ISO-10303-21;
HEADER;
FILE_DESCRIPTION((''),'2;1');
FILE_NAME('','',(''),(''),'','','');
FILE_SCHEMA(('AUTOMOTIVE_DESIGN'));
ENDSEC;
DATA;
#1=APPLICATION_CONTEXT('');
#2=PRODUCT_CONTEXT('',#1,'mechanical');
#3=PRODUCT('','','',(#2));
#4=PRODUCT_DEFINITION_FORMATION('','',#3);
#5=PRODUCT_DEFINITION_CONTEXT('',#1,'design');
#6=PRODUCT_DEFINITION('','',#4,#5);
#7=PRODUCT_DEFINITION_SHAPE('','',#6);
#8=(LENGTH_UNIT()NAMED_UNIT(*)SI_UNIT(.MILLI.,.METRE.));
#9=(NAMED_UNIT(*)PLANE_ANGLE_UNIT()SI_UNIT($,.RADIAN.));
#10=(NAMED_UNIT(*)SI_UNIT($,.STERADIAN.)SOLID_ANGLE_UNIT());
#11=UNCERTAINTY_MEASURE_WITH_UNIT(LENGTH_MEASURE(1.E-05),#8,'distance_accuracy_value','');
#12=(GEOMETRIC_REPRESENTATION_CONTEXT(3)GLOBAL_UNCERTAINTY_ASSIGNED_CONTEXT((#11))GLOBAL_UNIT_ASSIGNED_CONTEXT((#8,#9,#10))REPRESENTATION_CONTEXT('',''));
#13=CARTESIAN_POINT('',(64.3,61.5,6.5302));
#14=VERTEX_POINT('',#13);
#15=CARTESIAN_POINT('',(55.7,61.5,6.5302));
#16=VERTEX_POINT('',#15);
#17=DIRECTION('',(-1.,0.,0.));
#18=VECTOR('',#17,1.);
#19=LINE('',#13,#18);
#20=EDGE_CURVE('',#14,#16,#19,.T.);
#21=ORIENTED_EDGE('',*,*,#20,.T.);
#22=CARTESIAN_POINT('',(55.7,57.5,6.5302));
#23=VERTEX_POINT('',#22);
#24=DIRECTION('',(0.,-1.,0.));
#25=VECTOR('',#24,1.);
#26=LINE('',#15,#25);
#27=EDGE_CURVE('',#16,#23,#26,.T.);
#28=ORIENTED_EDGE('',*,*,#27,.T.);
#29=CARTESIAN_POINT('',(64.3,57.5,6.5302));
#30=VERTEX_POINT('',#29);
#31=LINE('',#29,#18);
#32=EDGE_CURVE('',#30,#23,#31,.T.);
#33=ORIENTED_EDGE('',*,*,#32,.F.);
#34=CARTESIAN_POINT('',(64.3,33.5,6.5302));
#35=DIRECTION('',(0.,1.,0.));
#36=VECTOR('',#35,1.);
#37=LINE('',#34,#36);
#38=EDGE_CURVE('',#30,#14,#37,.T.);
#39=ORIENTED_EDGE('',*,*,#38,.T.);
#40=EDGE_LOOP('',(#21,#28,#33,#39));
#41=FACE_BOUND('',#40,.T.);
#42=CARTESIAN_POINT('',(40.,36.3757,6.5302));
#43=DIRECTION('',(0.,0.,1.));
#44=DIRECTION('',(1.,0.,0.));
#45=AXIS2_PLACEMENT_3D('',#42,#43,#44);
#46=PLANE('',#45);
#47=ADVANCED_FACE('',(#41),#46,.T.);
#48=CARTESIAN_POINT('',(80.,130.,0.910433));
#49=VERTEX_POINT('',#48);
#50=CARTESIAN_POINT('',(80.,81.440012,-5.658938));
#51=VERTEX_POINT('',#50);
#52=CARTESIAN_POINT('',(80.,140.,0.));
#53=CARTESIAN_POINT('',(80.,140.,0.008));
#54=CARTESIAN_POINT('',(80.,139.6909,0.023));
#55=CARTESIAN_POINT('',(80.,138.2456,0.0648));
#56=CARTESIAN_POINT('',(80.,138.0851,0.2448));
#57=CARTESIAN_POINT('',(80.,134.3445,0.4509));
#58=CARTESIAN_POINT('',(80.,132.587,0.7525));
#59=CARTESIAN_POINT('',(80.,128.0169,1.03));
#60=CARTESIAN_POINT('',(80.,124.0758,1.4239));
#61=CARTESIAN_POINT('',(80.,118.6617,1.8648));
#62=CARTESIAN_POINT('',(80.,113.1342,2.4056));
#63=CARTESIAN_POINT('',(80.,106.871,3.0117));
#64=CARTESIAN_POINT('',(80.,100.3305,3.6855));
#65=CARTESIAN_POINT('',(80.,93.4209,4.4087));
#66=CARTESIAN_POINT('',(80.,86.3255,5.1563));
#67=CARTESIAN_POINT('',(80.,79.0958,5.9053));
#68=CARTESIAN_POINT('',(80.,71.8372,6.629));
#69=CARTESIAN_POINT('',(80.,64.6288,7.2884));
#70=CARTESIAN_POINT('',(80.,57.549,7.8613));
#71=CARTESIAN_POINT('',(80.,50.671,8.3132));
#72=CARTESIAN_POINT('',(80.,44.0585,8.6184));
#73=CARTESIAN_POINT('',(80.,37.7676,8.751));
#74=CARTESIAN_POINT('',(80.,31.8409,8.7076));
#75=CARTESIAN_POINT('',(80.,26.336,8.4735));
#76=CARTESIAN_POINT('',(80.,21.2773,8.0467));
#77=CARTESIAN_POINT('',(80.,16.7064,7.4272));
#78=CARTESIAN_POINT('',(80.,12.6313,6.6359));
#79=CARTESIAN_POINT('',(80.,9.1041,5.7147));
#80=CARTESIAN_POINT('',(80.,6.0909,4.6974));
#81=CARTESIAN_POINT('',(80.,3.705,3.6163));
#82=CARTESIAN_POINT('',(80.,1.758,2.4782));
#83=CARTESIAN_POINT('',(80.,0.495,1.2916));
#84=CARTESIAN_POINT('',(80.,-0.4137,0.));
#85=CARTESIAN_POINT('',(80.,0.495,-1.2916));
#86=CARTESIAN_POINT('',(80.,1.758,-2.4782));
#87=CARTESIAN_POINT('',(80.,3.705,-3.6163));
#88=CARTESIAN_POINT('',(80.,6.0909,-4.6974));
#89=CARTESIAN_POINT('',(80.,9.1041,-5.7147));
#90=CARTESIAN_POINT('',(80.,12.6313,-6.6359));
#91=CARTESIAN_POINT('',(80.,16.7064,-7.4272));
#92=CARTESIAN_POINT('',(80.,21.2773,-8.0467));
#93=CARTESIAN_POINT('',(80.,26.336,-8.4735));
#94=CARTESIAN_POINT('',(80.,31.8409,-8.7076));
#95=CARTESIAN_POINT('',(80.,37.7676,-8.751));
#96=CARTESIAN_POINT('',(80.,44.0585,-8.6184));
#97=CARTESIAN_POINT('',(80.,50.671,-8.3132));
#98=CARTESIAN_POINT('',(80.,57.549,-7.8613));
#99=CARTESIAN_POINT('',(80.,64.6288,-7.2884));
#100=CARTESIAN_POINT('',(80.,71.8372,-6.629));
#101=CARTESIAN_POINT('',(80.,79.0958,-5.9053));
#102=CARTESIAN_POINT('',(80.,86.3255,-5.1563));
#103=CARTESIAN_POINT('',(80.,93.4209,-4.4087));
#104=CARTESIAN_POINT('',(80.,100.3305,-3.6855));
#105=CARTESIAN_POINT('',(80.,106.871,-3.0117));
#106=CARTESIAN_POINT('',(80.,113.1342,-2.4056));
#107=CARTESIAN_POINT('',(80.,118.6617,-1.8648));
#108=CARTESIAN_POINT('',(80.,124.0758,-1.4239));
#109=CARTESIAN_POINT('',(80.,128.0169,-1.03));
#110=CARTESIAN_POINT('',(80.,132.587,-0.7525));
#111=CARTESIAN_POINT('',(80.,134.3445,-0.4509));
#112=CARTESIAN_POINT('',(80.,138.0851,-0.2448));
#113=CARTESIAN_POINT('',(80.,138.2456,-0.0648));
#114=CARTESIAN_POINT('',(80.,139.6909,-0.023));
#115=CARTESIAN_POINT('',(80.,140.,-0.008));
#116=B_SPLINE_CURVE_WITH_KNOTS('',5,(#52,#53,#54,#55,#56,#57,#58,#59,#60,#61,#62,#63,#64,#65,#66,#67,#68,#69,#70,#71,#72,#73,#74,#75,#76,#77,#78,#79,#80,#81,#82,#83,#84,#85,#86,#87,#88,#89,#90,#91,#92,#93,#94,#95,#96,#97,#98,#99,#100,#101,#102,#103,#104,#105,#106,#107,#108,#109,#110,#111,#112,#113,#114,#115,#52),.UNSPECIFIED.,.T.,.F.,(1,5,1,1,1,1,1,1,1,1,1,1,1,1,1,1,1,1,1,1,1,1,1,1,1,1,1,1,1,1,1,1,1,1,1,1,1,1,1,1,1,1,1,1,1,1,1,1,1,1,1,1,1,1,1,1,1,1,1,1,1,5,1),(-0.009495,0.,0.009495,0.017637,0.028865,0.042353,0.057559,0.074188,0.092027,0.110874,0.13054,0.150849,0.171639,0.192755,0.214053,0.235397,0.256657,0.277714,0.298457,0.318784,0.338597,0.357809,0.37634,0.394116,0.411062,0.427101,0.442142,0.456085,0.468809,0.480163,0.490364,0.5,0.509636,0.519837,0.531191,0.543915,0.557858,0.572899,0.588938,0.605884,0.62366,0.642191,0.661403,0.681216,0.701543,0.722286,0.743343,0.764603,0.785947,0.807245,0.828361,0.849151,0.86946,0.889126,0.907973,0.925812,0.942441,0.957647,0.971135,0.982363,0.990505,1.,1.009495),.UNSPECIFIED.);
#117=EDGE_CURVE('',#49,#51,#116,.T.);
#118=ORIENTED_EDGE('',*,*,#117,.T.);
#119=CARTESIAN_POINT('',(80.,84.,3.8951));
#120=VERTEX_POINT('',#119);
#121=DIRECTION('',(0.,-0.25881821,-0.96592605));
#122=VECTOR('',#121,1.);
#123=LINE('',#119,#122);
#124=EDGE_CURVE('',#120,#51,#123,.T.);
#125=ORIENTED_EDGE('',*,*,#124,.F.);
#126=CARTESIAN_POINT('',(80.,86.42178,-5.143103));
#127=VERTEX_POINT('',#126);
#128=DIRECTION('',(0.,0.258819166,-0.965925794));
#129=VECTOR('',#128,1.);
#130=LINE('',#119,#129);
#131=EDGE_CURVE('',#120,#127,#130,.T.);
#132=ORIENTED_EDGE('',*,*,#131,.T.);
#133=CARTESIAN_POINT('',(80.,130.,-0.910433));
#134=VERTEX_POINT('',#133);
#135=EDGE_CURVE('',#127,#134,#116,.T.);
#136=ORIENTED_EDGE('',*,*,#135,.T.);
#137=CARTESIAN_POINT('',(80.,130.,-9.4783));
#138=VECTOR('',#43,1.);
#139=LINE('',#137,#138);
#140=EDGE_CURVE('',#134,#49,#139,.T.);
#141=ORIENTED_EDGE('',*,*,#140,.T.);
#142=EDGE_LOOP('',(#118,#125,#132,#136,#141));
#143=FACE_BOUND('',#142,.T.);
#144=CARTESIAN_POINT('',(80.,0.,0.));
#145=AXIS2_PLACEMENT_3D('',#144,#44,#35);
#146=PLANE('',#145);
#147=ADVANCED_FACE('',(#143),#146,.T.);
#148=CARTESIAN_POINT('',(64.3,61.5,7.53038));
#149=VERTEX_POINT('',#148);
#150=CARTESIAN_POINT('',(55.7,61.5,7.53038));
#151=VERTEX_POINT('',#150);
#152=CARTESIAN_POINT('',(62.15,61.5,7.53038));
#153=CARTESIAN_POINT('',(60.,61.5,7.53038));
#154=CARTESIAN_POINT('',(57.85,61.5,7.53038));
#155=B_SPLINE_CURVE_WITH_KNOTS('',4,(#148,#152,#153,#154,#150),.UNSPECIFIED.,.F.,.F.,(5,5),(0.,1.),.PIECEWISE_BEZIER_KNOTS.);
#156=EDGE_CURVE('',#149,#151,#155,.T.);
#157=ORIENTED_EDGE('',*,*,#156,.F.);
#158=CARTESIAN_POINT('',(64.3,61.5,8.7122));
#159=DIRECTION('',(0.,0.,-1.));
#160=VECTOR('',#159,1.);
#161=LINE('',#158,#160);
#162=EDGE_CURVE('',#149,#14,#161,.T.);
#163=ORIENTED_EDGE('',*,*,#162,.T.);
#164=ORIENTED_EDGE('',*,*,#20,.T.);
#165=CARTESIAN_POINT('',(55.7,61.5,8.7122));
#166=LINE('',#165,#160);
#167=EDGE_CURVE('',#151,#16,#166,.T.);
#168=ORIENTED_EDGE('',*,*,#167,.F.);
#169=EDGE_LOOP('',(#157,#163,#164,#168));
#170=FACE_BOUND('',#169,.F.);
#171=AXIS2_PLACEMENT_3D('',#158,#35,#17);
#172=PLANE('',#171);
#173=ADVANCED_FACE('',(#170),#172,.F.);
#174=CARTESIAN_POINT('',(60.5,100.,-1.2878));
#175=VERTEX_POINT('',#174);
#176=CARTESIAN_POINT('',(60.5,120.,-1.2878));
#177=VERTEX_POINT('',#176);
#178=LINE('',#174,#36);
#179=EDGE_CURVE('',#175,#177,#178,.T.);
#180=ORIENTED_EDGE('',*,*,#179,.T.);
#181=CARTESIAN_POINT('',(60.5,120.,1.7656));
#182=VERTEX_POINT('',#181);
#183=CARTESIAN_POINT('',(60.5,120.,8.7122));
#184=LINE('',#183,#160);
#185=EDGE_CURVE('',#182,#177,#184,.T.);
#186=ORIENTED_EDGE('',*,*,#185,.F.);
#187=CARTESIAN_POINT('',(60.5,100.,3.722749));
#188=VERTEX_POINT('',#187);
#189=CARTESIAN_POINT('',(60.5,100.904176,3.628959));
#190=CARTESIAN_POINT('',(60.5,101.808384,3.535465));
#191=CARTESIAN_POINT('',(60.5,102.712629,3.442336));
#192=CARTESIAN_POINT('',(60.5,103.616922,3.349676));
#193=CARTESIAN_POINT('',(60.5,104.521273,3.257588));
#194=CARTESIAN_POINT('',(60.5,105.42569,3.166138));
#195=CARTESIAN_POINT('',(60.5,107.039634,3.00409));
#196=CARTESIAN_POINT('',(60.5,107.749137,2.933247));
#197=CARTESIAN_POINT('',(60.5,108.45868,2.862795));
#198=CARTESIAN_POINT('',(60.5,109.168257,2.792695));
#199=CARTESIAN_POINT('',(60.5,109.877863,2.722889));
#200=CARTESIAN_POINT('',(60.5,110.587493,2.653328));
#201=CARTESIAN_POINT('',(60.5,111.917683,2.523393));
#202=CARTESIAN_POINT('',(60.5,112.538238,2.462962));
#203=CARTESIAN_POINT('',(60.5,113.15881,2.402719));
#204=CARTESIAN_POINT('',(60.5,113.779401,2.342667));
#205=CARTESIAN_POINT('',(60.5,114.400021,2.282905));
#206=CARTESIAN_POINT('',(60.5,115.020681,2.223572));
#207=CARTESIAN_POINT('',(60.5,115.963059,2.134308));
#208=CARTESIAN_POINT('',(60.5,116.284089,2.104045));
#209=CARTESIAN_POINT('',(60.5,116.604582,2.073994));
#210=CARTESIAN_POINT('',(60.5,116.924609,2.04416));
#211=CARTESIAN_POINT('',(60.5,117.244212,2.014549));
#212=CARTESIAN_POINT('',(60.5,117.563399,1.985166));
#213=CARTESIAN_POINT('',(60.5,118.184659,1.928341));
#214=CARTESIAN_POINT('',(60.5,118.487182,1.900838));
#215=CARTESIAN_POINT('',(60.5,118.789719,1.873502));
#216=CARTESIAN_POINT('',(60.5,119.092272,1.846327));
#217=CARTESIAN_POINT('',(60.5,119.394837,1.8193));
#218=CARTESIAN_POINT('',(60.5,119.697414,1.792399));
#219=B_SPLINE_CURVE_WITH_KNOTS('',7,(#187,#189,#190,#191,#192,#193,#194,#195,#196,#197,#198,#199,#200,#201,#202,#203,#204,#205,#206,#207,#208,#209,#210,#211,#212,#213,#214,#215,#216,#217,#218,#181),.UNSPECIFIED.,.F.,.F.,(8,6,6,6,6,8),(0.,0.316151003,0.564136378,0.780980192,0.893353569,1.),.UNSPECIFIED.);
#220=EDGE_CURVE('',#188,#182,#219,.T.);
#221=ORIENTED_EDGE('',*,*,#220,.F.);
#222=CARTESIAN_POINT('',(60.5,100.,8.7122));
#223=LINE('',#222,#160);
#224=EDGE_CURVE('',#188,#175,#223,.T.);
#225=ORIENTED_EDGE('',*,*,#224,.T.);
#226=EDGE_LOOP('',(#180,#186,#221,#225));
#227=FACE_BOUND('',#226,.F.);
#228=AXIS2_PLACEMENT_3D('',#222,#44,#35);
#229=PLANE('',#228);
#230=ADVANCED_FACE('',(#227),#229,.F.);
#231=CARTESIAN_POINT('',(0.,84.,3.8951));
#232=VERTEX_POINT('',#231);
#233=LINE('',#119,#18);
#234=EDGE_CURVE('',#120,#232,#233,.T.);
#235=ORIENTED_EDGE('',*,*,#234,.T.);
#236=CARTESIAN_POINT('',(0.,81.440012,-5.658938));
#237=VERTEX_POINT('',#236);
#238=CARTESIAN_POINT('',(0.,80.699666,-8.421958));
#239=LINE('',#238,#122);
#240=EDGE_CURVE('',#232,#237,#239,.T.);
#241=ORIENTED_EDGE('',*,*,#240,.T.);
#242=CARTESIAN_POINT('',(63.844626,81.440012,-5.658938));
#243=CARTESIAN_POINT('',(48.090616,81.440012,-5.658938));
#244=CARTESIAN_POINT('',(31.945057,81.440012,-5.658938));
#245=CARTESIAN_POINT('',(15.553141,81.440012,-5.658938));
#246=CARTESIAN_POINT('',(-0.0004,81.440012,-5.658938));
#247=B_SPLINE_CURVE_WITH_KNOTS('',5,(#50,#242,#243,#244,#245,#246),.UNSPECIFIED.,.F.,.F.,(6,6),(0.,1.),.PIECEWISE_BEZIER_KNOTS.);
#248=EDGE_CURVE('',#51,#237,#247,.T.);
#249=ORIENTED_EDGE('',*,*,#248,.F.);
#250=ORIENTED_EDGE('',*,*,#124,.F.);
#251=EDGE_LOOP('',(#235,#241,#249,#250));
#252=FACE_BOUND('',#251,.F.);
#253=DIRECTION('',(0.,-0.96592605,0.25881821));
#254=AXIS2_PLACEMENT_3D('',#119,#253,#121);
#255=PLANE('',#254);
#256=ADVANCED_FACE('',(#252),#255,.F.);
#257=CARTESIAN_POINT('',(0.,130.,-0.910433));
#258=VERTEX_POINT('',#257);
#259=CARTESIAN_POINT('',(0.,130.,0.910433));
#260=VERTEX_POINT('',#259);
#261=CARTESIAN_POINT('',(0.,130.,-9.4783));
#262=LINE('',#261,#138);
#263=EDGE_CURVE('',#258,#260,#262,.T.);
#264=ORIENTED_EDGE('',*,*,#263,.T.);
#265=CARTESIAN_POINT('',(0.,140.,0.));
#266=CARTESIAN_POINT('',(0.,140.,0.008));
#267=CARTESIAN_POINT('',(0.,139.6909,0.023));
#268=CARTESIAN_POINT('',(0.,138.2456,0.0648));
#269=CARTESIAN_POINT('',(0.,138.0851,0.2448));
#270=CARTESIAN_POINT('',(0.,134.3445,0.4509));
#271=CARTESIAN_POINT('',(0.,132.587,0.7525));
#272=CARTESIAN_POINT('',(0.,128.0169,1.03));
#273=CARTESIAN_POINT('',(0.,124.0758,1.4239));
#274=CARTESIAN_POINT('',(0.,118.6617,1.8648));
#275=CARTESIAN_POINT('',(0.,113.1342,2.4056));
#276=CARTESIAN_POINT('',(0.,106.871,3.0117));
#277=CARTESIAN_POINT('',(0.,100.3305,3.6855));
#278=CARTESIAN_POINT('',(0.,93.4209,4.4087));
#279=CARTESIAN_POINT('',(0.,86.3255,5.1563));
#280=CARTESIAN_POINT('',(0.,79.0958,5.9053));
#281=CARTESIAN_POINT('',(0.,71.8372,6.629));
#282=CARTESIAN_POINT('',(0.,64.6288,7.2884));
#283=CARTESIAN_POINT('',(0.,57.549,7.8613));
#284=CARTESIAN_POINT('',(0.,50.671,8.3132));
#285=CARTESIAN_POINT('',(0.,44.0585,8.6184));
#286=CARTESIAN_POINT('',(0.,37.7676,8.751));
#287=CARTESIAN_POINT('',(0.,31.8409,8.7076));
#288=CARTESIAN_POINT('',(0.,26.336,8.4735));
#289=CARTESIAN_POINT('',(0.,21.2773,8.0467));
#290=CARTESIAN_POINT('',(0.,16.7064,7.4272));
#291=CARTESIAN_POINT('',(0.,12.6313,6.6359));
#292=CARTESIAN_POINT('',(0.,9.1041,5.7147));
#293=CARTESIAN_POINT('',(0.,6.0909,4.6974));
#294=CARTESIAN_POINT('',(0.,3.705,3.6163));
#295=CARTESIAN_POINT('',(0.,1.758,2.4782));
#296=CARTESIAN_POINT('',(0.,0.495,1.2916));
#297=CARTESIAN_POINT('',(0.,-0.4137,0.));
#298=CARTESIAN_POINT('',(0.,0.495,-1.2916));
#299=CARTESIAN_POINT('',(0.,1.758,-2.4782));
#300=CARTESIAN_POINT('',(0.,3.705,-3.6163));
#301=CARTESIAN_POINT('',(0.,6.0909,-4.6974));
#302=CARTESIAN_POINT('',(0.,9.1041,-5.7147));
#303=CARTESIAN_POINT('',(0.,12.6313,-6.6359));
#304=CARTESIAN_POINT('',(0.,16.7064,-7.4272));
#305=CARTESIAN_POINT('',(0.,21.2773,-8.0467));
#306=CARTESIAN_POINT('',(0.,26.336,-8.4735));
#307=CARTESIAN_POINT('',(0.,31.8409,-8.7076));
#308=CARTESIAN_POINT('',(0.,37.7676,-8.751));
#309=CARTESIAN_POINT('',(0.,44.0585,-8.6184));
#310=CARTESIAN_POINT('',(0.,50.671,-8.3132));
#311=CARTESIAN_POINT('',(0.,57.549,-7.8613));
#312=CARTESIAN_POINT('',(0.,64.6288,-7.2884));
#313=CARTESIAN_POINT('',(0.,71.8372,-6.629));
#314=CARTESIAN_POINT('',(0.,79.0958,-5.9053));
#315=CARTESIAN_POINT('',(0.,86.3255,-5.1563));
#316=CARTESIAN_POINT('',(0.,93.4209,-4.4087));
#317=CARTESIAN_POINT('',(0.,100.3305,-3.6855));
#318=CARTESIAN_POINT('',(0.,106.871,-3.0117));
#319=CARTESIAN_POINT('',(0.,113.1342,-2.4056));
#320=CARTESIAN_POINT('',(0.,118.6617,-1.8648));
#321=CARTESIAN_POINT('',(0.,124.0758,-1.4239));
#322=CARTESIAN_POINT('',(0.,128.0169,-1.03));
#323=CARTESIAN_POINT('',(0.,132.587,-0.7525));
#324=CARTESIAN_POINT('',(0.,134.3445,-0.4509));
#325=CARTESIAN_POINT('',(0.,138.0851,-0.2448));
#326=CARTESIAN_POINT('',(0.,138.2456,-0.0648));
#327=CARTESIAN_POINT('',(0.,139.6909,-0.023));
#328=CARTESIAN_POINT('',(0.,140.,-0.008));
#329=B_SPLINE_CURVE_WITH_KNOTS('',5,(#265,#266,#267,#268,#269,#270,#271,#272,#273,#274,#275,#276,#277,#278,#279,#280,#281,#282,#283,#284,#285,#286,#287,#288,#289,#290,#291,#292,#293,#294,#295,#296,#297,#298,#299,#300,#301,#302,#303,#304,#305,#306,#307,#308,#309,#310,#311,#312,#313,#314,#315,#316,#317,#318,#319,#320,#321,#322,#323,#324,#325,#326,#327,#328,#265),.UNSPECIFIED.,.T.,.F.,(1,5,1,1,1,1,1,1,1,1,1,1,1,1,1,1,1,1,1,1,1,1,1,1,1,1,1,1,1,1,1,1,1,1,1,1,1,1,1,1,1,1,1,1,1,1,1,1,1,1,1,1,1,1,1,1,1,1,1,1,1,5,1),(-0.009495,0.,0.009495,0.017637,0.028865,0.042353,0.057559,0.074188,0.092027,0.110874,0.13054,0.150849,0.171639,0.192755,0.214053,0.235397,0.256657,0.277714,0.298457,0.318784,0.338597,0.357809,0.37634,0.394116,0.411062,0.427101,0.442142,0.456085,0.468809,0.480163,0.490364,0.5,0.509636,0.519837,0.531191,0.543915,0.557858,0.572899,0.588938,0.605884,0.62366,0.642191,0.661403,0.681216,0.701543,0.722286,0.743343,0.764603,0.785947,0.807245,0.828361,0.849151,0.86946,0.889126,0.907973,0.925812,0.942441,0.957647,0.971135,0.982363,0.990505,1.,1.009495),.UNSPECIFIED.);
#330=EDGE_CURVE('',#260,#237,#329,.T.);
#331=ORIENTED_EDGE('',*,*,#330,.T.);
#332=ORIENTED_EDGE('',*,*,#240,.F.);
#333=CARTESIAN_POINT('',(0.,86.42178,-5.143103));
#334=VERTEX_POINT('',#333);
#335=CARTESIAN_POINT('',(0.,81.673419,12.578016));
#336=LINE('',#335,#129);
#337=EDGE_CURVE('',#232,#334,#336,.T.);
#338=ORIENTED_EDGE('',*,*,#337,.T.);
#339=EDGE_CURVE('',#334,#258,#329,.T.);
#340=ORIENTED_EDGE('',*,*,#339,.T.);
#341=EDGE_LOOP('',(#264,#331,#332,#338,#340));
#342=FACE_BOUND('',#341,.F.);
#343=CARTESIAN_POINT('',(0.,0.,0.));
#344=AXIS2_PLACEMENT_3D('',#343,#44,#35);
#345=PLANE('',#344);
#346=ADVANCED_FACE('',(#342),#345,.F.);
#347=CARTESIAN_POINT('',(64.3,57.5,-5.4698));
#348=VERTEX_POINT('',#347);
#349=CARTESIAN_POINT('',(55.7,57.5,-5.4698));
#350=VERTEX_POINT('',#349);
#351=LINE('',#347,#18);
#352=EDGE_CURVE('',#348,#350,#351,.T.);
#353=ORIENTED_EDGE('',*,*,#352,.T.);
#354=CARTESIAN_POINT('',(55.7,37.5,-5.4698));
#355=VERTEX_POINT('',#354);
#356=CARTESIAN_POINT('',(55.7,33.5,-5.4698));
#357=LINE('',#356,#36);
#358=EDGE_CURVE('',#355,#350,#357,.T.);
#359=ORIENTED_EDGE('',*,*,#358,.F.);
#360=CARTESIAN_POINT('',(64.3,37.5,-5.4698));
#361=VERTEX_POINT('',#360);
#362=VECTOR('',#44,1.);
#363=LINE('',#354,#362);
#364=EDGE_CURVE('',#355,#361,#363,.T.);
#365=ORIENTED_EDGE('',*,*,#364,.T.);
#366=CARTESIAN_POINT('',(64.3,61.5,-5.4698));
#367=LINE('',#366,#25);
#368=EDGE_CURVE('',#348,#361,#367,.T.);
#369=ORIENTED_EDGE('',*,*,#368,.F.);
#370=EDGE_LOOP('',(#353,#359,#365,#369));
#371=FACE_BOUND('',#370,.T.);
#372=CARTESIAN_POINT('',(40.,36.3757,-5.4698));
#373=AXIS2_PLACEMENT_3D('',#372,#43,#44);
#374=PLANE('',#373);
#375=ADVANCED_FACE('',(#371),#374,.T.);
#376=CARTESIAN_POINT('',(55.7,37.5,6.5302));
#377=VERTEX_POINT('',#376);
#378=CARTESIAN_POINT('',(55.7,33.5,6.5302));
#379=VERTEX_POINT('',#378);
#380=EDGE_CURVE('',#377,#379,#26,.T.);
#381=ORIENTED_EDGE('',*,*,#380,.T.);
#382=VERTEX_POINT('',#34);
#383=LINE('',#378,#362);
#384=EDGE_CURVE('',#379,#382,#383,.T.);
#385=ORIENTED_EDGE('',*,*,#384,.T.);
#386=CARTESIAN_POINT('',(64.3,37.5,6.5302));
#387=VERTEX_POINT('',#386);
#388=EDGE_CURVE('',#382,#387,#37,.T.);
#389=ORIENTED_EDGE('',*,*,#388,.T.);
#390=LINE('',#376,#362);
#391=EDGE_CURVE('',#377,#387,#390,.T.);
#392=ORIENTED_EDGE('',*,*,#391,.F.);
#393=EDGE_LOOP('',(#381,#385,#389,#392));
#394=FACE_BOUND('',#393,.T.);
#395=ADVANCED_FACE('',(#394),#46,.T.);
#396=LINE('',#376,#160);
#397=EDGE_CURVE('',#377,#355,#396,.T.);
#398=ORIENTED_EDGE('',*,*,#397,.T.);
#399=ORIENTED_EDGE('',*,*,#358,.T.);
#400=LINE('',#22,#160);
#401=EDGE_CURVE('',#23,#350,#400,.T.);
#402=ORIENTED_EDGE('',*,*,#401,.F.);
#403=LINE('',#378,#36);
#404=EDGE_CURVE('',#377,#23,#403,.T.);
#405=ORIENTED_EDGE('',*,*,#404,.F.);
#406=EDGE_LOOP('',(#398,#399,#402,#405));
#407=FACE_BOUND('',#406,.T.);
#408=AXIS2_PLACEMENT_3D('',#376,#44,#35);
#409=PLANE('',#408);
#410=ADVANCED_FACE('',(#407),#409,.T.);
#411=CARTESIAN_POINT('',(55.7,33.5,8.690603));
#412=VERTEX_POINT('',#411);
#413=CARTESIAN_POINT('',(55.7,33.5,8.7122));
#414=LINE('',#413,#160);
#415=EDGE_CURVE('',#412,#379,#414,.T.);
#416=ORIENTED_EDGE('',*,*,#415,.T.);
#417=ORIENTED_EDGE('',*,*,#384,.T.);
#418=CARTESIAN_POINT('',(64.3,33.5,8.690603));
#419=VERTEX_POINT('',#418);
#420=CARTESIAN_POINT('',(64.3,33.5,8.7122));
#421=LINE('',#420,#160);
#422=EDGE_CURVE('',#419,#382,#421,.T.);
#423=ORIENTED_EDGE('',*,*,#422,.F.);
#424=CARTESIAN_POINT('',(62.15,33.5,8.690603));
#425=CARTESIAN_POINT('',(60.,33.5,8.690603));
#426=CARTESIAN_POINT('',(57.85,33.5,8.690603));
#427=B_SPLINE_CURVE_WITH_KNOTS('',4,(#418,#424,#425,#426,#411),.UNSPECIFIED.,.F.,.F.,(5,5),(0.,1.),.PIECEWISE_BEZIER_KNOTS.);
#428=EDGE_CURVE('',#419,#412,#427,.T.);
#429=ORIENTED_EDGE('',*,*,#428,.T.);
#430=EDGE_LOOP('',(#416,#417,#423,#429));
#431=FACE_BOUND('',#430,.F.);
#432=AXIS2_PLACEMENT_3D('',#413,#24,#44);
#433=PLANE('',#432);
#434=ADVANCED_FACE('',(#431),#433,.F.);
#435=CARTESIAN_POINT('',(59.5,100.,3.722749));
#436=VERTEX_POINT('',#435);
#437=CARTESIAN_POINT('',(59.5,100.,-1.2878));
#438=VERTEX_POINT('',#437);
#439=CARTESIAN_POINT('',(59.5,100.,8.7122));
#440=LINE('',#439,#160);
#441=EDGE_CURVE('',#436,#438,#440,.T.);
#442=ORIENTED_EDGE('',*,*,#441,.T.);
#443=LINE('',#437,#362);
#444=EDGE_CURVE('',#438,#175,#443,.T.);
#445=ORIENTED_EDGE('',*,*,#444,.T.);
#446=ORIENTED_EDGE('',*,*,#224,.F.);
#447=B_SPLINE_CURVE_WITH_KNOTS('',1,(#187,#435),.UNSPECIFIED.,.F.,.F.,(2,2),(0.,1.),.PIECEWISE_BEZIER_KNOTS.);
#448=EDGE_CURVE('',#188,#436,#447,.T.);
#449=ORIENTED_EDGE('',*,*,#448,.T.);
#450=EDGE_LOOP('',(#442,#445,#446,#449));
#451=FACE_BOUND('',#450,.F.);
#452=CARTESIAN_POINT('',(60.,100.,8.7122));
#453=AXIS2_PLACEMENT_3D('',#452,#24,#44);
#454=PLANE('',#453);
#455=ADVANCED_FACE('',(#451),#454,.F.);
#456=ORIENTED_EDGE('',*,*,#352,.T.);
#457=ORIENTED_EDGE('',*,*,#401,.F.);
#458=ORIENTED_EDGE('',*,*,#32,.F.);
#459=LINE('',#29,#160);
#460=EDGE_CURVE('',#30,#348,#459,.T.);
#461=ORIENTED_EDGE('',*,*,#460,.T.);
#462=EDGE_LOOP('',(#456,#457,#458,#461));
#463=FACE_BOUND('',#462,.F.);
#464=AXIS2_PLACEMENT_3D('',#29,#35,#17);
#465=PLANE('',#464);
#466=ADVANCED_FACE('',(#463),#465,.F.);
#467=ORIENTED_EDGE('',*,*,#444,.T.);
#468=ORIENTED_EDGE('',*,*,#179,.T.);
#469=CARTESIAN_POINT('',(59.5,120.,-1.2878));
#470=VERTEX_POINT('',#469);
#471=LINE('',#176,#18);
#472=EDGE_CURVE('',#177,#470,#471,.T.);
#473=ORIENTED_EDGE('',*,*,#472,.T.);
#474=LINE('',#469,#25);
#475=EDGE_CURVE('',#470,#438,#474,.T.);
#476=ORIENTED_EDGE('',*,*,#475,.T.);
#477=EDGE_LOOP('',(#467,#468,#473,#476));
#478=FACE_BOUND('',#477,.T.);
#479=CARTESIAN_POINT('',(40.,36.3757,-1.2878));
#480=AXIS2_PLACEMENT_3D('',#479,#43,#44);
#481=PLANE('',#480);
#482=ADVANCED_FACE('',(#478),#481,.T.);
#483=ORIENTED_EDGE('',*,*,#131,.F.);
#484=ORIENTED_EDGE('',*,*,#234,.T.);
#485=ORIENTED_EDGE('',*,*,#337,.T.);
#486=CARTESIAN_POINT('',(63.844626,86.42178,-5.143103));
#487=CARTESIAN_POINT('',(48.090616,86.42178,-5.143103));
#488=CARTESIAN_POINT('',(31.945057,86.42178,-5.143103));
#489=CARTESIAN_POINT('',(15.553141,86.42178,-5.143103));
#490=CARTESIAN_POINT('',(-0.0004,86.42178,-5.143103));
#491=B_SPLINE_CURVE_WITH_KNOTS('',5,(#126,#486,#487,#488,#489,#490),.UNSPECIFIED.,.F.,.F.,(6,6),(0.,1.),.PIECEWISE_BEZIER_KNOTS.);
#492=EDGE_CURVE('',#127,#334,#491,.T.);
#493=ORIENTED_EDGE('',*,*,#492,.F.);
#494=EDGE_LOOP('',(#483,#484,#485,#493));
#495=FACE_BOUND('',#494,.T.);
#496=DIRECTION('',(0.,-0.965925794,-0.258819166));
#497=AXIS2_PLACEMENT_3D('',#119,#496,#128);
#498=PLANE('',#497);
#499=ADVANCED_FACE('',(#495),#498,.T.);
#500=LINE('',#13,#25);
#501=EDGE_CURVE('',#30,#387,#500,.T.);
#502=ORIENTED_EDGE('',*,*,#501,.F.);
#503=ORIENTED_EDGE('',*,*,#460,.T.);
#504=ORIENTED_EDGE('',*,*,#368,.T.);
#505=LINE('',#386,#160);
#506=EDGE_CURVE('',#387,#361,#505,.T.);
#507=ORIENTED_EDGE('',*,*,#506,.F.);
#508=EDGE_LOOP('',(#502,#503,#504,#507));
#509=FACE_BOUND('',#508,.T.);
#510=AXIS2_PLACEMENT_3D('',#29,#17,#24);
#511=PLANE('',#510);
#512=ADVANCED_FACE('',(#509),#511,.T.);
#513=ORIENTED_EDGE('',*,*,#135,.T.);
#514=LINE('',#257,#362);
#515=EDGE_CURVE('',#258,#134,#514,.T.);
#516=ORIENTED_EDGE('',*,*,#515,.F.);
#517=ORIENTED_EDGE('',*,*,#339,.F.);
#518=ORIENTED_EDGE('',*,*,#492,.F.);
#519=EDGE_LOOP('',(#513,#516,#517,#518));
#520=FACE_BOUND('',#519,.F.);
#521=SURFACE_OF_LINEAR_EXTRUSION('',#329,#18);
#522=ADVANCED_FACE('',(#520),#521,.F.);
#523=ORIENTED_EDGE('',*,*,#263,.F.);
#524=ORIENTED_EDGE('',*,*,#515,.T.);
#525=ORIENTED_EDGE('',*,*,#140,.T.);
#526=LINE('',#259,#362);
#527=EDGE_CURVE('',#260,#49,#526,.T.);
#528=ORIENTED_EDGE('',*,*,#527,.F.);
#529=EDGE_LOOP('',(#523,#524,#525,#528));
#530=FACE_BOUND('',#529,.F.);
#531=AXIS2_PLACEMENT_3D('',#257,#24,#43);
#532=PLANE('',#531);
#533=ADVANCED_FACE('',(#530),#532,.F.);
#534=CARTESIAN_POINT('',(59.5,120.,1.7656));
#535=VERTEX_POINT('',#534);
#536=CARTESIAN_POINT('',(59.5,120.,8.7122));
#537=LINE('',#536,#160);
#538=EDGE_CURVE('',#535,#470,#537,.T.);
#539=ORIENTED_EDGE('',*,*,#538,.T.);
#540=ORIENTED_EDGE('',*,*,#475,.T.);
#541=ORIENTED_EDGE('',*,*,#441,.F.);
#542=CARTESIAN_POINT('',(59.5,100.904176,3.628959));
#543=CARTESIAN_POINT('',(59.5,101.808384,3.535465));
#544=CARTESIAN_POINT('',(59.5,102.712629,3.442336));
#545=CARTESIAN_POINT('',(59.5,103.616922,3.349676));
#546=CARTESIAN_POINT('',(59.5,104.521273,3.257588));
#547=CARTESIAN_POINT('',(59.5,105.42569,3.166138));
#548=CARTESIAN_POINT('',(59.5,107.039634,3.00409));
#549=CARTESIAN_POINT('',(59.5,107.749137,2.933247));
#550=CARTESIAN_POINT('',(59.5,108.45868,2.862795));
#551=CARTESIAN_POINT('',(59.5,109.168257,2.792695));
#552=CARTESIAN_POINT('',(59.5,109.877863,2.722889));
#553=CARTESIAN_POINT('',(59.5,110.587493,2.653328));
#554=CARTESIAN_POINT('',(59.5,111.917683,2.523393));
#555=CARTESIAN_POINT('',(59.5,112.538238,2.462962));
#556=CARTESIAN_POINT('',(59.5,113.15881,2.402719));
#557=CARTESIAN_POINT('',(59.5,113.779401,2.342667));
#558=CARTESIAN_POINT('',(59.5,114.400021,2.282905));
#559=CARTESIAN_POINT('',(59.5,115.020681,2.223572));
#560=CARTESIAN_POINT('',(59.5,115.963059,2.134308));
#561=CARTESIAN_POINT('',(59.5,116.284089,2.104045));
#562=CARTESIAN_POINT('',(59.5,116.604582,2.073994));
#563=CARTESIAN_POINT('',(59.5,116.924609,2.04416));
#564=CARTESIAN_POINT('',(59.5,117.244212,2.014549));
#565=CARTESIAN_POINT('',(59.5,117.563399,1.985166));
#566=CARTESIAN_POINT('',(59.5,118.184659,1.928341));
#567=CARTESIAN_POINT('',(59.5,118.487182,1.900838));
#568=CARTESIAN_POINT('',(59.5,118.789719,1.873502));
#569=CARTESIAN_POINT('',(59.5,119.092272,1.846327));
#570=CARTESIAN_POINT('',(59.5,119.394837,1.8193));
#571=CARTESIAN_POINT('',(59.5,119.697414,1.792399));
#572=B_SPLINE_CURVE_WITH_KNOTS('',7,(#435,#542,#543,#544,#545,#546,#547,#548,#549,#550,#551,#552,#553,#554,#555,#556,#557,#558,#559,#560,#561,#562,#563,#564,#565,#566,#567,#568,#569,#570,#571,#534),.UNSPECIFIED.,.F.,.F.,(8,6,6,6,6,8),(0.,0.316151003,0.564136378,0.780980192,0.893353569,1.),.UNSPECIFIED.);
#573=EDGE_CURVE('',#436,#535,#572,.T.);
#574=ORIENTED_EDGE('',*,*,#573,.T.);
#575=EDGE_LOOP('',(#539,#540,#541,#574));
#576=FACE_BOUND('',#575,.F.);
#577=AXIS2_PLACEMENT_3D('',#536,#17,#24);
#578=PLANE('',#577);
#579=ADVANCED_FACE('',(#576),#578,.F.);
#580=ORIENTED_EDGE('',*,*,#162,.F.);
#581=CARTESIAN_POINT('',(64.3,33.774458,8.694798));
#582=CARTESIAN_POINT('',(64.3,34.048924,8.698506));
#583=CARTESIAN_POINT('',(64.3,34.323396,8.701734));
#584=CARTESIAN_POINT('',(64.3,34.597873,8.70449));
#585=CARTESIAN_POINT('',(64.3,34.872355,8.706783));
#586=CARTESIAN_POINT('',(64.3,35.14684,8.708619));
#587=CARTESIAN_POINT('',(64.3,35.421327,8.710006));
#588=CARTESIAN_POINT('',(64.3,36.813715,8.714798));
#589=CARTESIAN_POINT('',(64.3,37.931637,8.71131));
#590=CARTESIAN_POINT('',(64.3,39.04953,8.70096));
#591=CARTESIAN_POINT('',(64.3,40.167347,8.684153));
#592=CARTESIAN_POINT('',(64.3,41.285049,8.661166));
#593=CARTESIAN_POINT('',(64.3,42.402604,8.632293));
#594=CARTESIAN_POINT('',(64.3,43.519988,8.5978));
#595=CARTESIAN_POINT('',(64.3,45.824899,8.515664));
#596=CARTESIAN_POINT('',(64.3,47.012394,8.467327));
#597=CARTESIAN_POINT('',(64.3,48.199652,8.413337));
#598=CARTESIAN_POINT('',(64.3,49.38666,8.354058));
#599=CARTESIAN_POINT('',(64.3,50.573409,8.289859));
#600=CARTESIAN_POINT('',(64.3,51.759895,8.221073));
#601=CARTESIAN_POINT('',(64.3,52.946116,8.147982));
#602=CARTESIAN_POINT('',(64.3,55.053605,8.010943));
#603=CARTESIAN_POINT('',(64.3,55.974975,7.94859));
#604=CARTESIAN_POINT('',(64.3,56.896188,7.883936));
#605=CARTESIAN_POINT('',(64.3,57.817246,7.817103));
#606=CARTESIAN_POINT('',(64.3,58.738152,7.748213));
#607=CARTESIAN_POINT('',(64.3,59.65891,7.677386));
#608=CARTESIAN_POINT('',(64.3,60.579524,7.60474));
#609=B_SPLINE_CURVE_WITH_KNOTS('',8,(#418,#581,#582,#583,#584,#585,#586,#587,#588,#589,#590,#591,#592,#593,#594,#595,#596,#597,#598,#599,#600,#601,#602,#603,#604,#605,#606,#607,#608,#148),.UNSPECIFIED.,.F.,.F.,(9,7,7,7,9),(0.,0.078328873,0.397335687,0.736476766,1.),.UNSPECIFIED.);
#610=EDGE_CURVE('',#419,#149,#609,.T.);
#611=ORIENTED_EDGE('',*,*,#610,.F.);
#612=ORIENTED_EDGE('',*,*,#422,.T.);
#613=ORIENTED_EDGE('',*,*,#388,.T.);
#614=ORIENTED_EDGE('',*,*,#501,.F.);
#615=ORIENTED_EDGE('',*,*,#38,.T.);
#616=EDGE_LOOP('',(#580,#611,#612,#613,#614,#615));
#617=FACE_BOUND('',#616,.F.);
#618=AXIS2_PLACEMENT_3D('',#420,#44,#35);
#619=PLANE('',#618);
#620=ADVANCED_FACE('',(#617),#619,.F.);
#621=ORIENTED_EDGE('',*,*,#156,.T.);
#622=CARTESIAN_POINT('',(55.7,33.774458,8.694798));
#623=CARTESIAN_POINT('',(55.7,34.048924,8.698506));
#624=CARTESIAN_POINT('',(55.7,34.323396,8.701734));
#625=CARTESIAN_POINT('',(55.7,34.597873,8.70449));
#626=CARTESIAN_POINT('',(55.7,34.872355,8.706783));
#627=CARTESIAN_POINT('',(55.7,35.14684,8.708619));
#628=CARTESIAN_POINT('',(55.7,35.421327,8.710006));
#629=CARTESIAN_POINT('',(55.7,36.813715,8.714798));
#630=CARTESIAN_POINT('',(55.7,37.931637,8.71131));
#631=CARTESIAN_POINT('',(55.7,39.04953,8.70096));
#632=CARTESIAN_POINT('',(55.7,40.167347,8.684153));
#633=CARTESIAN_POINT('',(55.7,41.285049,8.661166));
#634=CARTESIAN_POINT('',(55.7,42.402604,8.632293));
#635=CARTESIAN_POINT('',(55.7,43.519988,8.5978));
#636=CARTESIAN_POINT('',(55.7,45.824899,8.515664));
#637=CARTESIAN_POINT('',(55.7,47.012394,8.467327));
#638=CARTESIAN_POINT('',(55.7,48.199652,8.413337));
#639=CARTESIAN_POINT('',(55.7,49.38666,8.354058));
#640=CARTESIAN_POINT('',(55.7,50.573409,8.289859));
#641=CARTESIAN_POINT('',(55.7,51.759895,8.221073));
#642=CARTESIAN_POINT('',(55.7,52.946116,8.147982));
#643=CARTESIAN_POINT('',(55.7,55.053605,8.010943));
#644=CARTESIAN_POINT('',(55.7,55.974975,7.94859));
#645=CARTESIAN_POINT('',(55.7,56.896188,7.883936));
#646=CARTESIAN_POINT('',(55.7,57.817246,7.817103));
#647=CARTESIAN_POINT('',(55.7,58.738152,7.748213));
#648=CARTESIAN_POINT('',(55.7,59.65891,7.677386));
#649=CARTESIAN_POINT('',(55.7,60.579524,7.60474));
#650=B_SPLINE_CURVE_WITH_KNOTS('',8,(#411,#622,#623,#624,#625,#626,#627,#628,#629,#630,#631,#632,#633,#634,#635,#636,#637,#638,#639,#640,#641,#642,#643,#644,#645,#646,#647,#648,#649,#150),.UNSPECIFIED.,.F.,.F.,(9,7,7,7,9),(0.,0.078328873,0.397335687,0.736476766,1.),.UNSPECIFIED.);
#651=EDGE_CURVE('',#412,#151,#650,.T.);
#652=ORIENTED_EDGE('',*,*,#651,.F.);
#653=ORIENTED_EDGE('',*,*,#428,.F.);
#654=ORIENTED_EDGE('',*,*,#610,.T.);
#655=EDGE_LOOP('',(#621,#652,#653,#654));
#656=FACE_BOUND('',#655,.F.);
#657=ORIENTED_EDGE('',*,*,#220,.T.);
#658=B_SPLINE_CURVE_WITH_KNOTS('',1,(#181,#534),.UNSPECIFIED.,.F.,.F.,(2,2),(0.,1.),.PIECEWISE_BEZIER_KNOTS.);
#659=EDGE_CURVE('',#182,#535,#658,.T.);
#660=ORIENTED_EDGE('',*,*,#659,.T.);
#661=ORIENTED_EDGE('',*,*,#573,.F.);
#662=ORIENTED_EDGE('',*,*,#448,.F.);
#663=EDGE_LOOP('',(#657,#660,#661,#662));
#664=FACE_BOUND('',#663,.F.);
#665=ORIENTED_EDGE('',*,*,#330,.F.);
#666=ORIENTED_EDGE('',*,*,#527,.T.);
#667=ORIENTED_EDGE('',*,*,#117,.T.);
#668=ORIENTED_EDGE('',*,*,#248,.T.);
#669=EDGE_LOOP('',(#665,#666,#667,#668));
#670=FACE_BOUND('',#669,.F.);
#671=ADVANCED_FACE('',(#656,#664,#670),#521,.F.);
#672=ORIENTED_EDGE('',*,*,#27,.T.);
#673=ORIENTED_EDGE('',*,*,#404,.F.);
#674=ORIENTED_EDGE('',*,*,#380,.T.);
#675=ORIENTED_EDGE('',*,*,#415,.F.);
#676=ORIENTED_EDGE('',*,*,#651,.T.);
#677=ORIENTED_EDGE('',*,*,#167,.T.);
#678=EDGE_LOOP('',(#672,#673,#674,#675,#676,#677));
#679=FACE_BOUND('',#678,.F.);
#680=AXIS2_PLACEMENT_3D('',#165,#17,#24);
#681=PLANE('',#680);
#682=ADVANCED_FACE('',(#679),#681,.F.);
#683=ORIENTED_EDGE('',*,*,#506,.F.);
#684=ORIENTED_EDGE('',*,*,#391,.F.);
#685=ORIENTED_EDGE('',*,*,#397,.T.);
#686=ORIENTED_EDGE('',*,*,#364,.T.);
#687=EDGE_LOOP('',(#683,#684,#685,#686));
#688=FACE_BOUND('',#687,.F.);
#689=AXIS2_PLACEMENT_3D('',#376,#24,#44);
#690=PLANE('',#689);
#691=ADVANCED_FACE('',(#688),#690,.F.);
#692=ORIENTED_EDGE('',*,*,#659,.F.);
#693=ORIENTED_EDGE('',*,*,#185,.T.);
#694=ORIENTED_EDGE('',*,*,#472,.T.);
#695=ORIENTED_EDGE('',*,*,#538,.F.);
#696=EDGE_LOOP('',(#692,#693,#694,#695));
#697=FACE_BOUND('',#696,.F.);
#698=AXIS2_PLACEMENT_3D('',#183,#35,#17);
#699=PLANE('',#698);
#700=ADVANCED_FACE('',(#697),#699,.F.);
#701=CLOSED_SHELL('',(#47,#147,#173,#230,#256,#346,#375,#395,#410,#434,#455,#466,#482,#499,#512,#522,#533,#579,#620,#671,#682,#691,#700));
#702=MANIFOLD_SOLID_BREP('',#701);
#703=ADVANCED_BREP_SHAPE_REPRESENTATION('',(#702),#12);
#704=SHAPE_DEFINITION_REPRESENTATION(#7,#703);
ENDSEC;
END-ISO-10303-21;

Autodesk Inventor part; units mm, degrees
ref_plane "YZ Plane" through (0, 0, 0) normal (1, 0, 0) x (0, 1, 0)
ref_plane "XZ Plane" through (0, 0, 0) normal (0, 1, 0) x (-1, 0, 0)
sketch "Sketch1" plane through (0, 0, 0) normal (1, 0, 0) x (0, 1, 0)
  spline S0 degree 5 poles (140, 0) (140, 0.008) (139.6909, 0.023) (138.2456, 0.0648) (138.0851, 0.2448) (134.3445, 0.4509) (132.587, 0.7525) (128.0169, 1.03) (124.0758, 1.4239) (118.6617, 1.8648) (113.1342, 2.4056) (106.871, 3.0117) (100.3305, 3.6855) (93.4209, 4.4087) (86.3255, 5.1563) (79.0958, 5.9053) (71.8372, 6.629) (64.6288, 7.2884) (57.549, 7.8613) (50.671, 8.3132) (44.0585, 8.6184) (37.7676, 8.751) (31.8409, 8.7076) (26.336, 8.4735) (21.2773, 8.0467) (16.7064, 7.4272) (12.6313, 6.6359) (9.1041, 5.7147) (6.0909, 4.6974) (3.705, 3.6163) (1.758, 2.4782) (0.495, 1.2916) (-0.4137, 0) (0.495, -1.2916) (1.758, -2.4782) (3.705, -3.6163) (6.0909, -4.6974) (9.1041, -5.7147) (12.6313, -6.6359) (16.7064, -7.4272) (21.2773, -8.0467) (26.336, -8.4735) (31.8409, -8.7076) (37.7676, -8.751) (44.0585, -8.6184) (50.671, -8.3132) (57.549, -7.8613) (64.6288, -7.2884) (71.8372, -6.629) (79.0958, -5.9053) (86.3255, -5.1563) (93.4209, -4.4087) (100.3305, -3.6855) (106.871, -3.0117) (113.1342, -2.4056) (118.6617, -1.8648) (124.0758, -1.4239) (128.0169, -1.03) (132.587, -0.7525) (134.3445, -0.4509) (138.0851, -0.2448) (138.2456, -0.0648) (139.6909, -0.023) (140, -0.008) (140, 0) knots 0 0 0 0 0 0 0.009495 0.017637 0.028865 0.042353 0.057559 0.074188 0.092027 0.110874 0.13054 0.150849 0.171639 0.192755 0.214053 0.235397 0.256657 0.277714 0.298457 0.318784 0.338597 0.357809 0.37634 0.394116 0.411062 0.427101 0.442142 0.456085 0.468809 0.480163 0.490364 0.5 0.509636 0.519837 0.531191 0.543915 0.557858 0.572899 0.588938 0.605884 0.62366 0.642191 0.661403 0.681216 0.701543 0.722286 0.743343 0.764603 0.785947 0.807245 0.828361 0.849151 0.86946 0.889126 0.907973 0.925812 0.942441 0.957647 0.971135 0.982363 0.990505 1 1 1 1 1 1
  line L0 (130, 16.3724) -> (164.1986, 16.3724)
  line L1 (164.1986, 16.3724) -> (164.1986, -9.4783)
  line L2 (164.1986, -9.4783) -> (130, -9.4783)
  line L3 (130, -9.4783) -> (130, 16.3724)
  point P0 (138.0834, 0.1512)
  point P1 (135.8252, 0.3794)
  point P2 (132.797, 0.6664)
  point P3 (129.0044, 0.9884)
  point P4 (124.4796, 1.3706)
  point P5 (119.294, 1.8284)
  point P6 (113.526, 2.3674)
  point P7 (107.2624, 2.982)
  point P8 (100.5956, 3.661)
  point P9 (93.6194, 4.389)
  point P10 (86.4304, 5.1422)
  point P11 (79.1224, 5.8954)
  point P12 (71.785, 6.6192)
  point P13 (64.505, 7.28)
  point P14 (57.3608, 7.8484)
  point P15 (50.4266, 8.2936)
  point P16 (43.7668, 8.5876)
  point P17 (37.4346, 8.7094)
  point P18 (31.479, 8.6478)
  point P19 (25.9504, 8.393)
  point P20 (20.881, 7.9408)
  point P21 (16.2974, 7.2954)
  point P22 (12.222, 6.4778)
  point P23 (8.6772, 5.5216)
  point P24 (5.6966, 4.4618)
  point P25 (3.3082, 3.332)
  point P26 (1.533, 2.17)
  point P27 (0.4018, 1.0262)
  point P28 (0, 0)
  point P29 (0.4018, -1.0262)
  point P30 (1.533, -2.17)
  point P31 (3.3082, -3.332)
  point P32 (5.6966, -4.4618)
  point P33 (8.6772, -5.5216)
  point P34 (12.222, -6.4778)
  point P35 (16.2974, -7.2954)
  point P36 (20.881, -7.9408)
  point P37 (25.9504, -8.393)
  point P38 (31.479, -8.6478)
  point P39 (37.4346, -8.7094)
  point P40 (43.7668, -8.5876)
  point P41 (50.4266, -8.2936)
  point P42 (57.3608, -7.8484)
  point P43 (64.505, -7.28)
  point P44 (71.785, -6.6192)
  point P45 (79.1224, -5.8954)
  point P46 (86.4304, -5.1422)
  point P47 (93.6194, -4.389)
  point P48 (100.5956, -3.661)
  point P49 (107.2624, -2.982)
  point P50 (113.526, -2.3674)
  point P51 (119.294, -1.8284)
  point P52 (124.4796, -1.3706)
  point P53 (129.0044, -0.9884)
  point P54 (132.797, -0.6664)
  point P55 (135.8252, -0.3794)
  point P56 (138.0834, -0.1512)
  point P57 (139.5086, -0.0294)
  point P58 (130, -0.9104)
  point P59 (130, 0.9104)
  dimension "d9" = 130
extrude "Extrusion1" add sketch "Sketch1" along normal blind 80 contours L3 S0 picked at (63.1596, 2.072)
sketch "Sketch4" plane through (80, 0, 0) normal (1, 0, 0) x (0, 0, -1)
  line L0 (-5.3951, 84) -> (5.3822, 84)
  line L1 (-3.8951, 84) -> (9.1611, 87.4984)
  line L2 (-3.8951, 84) -> (8.5685, 80.6604)
  line L3 (7.1415, 86.9572) -> (7.696, 80.8942)
  point P0 (0, 0)
  dimension "d17" = 84
  dimension "d18" = 1.5
  dimension "d19" = 15
  dimension "d20" = 15
extrude "Extrusion3" cut sketch "Sketch4" against normal through all
ref_plane "Work Plane3" through (40, 36.3757, 8.7122) normal (0, 0, 1) x (1, 0, 0)
sketch "Sketch6" plane through (40, 36.3757, 8.7122) normal (0, 0, 1) x (1, 0, 0)
  line L0 (15.7, -2.8757) -> (24.3, -2.8757)
  line L1 (24.3, -2.8757) -> (24.3, 25.1243)
  line L2 (24.3, 25.1243) -> (15.7, 25.1243)
  line L3 (15.7, 25.1243) -> (15.7, -2.8757)
  line L4 (20, -2.8757) -> (20, 25.1243) construction
  line L5 (40, 47.6243) -> (40, 50.0461) projected
  line L6 (40, 31.3743) -> (40, 25.8743) projected
  line L7 (-40, 93.6243) -> (40, 93.6243) projected
  line L8 (40, -3.6257) -> (40, -9.1257) projected
  line L9 (24.3, 11.1243) -> (15.7, 11.1243) construction
  line L10 (-40, 93.6243) -> (-40, -36.3757) projected
  line L11 (40, 93.6243) -> (40, -36.3757) projected
  point P0 (-40, 45.0643)
  point P1 (40, 45.0643)
  dimension "d29" = 8.6
  dimension "d30" = 28
  dimension "d59" = 80
  dimension "d60" = 20
  dimension "d62" = 82.5
extrude "Extrusion5" cut sketch "Sketch6" against normal blind 2.182
sketch "Sketch8" plane through (40, 36.3757, 6.5302) normal (0, 0, 1) x (1, 0, 0)
  line L0 (15.7, -2.8757) -> (15.7, 25.1243) projected
  line L1 (24.3, 25.1243) -> (24.3, -2.8757) projected
  line L2 (15.7, 1.1243) -> (24.3, 1.1243)
  line L3 (24.3, 1.1243) -> (24.3, 21.1243)
  line L4 (24.3, 21.1243) -> (15.7, 21.1243)
  line L5 (15.7, 21.1243) -> (15.7, 1.1243)
  line L6 (24.3, -2.8757) -> (15.7, -2.8757) projected
  point P0 (-40, -36.3757)
  point P1 (47.7, 23.0998)
  point P2 (56.3, 23.0998)
  point P3 (15.7, 21.1243)
  point P4 (24.3, 1.1243)
  dimension "d48" = 20
  dimension "d49" = 4
extrude "Extrusion6" cut sketch "Sketch8" against normal blind 12 contours L0 L4 L1 L2
sketch "Sketch9" plane through (40, 36.3757, 8.7122) normal (0, 0, 1) x (1, 0, 0)
  line L0 (20.5, 83.6243) -> (19.5, 83.6243)
  line L1 (19.5, 83.6243) -> (19.5, 63.6243)
  line L2 (19.5, 63.6243) -> (20.5, 63.6243)
  line L3 (20.5, 63.6243) -> (20.5, 83.6243)
  line L4 (20, 7) -> (20, 118)
  line L5 (24.3, 25.1243) -> (24.3, 0) projected
  line L6 (-40, 93.6243) -> (40, 93.6243) projected
  point P0 (-40, -36.3757)
  point P1 (-26, 93.6243)
  dimension "d52" = 1
  dimension "d53" = 20
  dimension "d54" = 4.3
  dimension "d55" = 0.5
  dimension "d56" = 10
extrude "Extrusion7" cut sketch "Sketch9" against normal blind 10
equation "\"d60\" = 0.25 * d59"
properties part number "IISRD_Rudder_v3" material "EPP Foam"
